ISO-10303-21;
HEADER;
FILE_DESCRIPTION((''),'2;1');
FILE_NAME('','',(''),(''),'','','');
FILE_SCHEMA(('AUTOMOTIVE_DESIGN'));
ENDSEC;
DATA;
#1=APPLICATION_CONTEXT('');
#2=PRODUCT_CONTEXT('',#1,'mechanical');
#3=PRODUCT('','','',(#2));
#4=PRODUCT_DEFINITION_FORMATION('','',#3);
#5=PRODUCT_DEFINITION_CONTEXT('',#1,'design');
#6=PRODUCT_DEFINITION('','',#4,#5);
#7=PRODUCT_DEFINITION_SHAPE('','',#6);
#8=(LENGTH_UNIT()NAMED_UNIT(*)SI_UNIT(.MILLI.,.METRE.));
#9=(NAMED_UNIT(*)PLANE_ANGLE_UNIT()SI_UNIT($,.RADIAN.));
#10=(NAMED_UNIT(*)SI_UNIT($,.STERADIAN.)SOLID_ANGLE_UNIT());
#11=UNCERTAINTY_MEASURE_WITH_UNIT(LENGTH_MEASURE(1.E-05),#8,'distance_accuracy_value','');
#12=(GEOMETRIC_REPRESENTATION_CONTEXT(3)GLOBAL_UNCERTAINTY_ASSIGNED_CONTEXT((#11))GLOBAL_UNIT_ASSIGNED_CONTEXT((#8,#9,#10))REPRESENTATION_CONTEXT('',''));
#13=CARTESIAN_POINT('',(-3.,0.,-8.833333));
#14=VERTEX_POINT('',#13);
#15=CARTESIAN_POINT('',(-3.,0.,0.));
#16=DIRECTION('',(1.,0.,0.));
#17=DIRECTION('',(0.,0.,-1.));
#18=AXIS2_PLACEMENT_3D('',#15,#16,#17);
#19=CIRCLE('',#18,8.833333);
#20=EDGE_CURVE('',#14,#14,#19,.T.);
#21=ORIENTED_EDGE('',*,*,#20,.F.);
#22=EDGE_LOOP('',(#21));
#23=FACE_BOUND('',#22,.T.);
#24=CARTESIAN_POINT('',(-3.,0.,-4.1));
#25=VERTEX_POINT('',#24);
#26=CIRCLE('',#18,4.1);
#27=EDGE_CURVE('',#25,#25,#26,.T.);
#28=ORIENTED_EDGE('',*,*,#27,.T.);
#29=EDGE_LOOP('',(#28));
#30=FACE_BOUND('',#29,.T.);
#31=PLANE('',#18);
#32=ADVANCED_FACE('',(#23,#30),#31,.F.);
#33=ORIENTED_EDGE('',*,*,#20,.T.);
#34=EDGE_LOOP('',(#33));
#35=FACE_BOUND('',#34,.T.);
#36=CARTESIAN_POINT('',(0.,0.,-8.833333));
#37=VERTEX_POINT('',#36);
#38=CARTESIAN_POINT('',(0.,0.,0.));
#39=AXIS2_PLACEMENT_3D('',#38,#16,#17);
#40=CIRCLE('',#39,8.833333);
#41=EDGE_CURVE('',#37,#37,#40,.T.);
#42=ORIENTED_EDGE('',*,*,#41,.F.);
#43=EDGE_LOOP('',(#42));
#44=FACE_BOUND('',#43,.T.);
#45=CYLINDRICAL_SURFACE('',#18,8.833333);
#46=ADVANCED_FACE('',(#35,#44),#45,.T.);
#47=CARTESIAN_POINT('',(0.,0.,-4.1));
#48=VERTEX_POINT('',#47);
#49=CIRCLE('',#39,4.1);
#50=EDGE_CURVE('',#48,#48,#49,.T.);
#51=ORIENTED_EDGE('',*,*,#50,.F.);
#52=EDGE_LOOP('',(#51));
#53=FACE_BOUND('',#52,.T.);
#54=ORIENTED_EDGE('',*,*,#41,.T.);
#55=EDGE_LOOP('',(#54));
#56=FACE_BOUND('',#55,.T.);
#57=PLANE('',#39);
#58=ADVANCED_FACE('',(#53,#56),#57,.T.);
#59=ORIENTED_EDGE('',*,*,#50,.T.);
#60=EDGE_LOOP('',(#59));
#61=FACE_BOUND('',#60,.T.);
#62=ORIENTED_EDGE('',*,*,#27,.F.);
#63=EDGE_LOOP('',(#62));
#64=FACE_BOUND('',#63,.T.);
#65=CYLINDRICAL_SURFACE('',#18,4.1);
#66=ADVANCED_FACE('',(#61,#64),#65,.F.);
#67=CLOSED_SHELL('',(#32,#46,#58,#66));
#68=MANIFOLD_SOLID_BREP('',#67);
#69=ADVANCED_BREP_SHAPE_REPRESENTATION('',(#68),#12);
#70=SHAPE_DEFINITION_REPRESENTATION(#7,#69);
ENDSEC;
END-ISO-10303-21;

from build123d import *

# Parameters (mm, degrees)
SKETCH_1_R             = 8.833333333
SKETCH_1_R_2           = 4.1
SM_BASE_FLANGE_1_DEPTH = 3


# Sheet-metal steps are written as plain solids
with BuildPart() as part:
    # Sketch 1 → Базовая кромка1 (new body)
    with BuildSketch(Plane(origin=(0, 0, 0), x_dir=(0, 0, -1), z_dir=(1, 0, 0))):
        Circle(SKETCH_1_R)
        Circle(SKETCH_1_R_2, mode=Mode.SUBTRACT)
    extrude(amount=-SM_BASE_FLANGE_1_DEPTH)


solid = part.part
